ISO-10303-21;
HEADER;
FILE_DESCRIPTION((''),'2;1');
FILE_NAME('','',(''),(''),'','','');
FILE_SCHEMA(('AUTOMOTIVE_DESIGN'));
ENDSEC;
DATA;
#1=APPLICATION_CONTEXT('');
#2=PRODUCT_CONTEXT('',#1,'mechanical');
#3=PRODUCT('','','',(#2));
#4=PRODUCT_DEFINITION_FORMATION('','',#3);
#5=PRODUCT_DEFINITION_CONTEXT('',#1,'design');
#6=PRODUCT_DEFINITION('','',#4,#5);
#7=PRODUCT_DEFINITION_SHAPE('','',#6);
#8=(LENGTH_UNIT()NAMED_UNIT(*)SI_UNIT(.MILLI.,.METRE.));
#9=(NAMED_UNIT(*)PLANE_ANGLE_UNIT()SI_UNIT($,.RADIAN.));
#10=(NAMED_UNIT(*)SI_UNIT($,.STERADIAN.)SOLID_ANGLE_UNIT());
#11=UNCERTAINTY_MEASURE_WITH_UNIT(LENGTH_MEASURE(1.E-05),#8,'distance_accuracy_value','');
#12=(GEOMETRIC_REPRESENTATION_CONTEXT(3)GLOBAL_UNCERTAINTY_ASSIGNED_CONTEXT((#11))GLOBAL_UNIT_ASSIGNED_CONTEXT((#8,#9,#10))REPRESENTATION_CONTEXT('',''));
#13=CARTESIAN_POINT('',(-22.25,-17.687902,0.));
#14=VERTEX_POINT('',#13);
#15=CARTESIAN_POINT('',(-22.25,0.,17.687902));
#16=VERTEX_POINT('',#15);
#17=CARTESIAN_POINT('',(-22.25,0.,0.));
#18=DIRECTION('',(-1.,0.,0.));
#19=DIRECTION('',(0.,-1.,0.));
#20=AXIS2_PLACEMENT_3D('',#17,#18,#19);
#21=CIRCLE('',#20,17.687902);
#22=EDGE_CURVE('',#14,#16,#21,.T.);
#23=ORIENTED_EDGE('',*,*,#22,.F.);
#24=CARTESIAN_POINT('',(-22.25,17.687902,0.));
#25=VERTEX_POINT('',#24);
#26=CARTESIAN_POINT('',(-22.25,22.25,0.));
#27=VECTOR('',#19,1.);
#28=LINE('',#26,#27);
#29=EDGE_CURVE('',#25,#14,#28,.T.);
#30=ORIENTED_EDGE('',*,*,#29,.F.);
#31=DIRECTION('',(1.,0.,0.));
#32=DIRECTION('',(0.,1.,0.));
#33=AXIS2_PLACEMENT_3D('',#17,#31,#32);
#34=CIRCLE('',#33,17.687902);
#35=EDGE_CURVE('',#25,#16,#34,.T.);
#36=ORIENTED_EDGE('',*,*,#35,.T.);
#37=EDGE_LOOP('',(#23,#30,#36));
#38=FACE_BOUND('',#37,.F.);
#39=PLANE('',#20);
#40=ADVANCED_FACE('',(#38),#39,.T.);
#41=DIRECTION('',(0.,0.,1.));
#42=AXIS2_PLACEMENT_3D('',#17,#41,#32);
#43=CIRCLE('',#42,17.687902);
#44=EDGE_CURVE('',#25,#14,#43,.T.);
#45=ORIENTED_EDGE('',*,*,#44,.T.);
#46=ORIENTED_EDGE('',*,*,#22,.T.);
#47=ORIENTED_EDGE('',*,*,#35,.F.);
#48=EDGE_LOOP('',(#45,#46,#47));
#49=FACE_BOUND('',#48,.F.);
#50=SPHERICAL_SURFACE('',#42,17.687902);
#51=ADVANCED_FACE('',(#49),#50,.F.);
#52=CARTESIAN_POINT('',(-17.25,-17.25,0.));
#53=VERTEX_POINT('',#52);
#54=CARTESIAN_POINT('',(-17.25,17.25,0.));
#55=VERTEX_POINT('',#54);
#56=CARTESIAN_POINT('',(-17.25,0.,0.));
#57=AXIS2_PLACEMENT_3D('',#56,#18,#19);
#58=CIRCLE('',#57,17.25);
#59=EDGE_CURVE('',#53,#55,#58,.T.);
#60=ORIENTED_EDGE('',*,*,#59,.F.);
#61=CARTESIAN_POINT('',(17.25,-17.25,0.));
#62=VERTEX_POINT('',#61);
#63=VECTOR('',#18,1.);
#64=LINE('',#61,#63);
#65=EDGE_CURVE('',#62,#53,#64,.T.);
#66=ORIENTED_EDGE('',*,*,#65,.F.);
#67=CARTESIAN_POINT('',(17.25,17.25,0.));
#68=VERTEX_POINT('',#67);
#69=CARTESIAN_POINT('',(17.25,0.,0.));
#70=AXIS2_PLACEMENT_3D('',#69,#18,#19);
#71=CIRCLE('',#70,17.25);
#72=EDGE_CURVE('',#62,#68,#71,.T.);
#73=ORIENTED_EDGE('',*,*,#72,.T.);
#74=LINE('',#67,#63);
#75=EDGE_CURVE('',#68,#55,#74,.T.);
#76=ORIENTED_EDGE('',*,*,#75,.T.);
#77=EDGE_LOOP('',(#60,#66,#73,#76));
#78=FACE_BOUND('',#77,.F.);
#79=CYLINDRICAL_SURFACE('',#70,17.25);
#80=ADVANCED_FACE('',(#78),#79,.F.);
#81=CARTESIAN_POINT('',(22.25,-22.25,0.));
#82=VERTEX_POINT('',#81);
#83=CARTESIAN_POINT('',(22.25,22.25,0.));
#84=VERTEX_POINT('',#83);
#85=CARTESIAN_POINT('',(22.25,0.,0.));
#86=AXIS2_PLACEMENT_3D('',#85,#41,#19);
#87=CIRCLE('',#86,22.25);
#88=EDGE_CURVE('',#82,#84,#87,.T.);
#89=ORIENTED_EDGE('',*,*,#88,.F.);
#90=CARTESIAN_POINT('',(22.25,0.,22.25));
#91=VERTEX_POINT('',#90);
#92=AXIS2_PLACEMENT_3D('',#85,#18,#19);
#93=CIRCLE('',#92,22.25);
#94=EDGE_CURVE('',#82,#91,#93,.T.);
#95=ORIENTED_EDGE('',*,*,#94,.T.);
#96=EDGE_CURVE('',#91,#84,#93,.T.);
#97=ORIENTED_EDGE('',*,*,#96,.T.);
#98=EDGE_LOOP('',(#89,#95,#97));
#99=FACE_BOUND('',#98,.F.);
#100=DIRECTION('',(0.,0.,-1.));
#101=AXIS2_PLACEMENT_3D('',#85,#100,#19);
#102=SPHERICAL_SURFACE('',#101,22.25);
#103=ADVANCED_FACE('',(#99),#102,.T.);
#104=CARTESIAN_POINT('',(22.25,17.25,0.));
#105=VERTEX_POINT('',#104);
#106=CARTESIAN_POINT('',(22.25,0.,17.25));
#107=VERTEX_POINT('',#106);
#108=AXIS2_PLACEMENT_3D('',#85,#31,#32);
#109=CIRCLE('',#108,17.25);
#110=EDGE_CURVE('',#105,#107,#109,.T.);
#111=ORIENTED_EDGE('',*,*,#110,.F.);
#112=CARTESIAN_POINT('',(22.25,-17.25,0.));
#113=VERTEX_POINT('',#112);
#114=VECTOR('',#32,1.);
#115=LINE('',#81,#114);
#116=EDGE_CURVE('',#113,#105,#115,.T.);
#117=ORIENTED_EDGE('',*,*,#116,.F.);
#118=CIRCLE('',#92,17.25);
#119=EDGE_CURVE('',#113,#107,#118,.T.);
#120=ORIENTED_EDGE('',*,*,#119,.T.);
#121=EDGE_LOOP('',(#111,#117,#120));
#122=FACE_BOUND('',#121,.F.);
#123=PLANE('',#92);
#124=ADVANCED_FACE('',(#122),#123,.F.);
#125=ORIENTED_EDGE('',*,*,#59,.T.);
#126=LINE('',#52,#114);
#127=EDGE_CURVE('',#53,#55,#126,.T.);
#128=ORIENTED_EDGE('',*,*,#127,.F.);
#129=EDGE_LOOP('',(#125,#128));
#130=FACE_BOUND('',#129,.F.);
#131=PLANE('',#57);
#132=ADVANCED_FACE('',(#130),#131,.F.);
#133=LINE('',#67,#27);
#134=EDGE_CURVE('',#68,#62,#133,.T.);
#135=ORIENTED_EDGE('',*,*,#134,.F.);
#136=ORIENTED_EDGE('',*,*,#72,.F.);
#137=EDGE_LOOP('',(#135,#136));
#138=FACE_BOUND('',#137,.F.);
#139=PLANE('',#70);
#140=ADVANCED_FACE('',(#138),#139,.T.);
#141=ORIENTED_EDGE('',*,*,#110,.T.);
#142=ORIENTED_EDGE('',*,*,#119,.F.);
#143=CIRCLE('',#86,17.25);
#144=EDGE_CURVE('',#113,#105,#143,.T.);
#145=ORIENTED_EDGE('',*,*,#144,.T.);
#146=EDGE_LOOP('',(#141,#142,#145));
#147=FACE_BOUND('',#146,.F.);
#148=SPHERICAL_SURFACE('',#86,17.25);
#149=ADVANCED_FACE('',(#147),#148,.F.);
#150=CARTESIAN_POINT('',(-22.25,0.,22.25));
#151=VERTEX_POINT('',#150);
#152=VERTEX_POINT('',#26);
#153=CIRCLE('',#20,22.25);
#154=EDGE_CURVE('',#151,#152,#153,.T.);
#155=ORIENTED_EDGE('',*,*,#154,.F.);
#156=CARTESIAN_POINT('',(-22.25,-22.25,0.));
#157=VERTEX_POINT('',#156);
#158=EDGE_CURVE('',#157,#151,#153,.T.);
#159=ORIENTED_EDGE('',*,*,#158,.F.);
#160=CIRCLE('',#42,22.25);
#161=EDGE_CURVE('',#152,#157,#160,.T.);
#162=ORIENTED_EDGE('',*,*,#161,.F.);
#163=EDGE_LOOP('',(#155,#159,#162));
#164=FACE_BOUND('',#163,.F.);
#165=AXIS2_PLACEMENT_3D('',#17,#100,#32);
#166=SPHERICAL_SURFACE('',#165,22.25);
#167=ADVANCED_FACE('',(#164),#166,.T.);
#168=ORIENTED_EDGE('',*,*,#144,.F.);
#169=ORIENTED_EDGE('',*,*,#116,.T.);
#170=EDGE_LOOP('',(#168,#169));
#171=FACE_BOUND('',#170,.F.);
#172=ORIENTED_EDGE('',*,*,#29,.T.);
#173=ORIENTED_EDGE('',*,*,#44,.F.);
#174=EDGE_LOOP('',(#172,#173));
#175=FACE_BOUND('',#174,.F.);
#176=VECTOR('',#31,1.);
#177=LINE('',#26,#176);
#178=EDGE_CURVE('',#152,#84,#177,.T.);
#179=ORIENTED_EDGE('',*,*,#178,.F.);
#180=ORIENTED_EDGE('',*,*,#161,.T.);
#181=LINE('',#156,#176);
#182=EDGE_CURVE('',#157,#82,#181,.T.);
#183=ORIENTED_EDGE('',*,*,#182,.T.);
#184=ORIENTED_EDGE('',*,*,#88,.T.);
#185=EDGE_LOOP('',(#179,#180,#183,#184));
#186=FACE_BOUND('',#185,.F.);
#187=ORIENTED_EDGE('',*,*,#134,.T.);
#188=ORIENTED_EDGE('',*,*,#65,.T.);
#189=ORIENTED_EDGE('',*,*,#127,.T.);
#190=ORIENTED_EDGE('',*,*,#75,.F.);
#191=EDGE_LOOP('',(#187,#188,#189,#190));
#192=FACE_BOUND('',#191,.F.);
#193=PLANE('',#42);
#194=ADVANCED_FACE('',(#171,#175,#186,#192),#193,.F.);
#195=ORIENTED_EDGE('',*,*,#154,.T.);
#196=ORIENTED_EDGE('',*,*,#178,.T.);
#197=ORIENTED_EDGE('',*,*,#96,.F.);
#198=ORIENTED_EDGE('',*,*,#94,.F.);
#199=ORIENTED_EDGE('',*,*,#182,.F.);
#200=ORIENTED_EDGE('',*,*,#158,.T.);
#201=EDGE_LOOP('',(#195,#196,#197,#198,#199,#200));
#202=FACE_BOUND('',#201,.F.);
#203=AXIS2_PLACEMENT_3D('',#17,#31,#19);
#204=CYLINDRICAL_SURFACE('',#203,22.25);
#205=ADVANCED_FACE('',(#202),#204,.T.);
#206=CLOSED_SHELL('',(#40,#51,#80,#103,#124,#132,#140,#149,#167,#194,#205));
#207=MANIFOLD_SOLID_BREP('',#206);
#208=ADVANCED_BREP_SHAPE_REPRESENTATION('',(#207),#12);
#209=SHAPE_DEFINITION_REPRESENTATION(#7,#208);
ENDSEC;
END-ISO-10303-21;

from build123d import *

# Parameters (mm, degrees)
F1_ANGLE = 180
F3_ANGLE = 180
F5_ANGLE = 180


with BuildPart() as f1:
    # F0 (on Top) → F1 (revolve)
    with BuildSketch(Plane.XY):
        Polygon((22.25, -22.25), (22.25, 0), (17.25, 0), (17.25, -17.25), (-17.25, -17.25), (-17.25, 0), (-22.25, 0), (-22.25, -22.25), align=None)
    revolve(axis=Axis((4.6253763139, 0, 0), (-1, 0, 0)), revolution_arc=F1_ANGLE)

    # F2 (on face) → F3 (revolve)
    with BuildSketch(Plane.YZ.offset(22.25)):
        with BuildLine():
            ThreePointArc((0, 22.25), (-15.7331258814, 15.7331258814), (-22.25, 0))
            Line((-22.25, 0), (-17.25, 0))
            ThreePointArc((-17.25, 0), (-12.1975919755, 12.1975919755), (0, 17.25))
            Line((0, 17.25), (0, 22.25))
        make_face()
    revolve(axis=Axis((22.25, 0, 10.080948472), (0, 0, 1)), revolution_arc=F3_ANGLE)

    # F4 (on face) → F5 (revolve)
    with BuildSketch(Plane(origin=(-22.25, 0, 0), x_dir=(0, -1, 0), z_dir=(-1, 0, 0))):
        with BuildLine():
            ThreePointArc((0, 22.25), (-15.7331258814, 15.7331258814), (-22.25, 0))
            Line((-22.25, 0), (-17.6879018545, 0))
            ThreePointArc((-17.6879018545, 0), (-12.5072353463, 12.5072353463), (0, 17.6879018545))
            Line((0, 17.6879018545), (0, 22.25))
        make_face()
    revolve(axis=Axis((-22.25, 0, 6.120197475), (0, 0, 1)), revolution_arc=F5_ANGLE)


solid = f1.part
